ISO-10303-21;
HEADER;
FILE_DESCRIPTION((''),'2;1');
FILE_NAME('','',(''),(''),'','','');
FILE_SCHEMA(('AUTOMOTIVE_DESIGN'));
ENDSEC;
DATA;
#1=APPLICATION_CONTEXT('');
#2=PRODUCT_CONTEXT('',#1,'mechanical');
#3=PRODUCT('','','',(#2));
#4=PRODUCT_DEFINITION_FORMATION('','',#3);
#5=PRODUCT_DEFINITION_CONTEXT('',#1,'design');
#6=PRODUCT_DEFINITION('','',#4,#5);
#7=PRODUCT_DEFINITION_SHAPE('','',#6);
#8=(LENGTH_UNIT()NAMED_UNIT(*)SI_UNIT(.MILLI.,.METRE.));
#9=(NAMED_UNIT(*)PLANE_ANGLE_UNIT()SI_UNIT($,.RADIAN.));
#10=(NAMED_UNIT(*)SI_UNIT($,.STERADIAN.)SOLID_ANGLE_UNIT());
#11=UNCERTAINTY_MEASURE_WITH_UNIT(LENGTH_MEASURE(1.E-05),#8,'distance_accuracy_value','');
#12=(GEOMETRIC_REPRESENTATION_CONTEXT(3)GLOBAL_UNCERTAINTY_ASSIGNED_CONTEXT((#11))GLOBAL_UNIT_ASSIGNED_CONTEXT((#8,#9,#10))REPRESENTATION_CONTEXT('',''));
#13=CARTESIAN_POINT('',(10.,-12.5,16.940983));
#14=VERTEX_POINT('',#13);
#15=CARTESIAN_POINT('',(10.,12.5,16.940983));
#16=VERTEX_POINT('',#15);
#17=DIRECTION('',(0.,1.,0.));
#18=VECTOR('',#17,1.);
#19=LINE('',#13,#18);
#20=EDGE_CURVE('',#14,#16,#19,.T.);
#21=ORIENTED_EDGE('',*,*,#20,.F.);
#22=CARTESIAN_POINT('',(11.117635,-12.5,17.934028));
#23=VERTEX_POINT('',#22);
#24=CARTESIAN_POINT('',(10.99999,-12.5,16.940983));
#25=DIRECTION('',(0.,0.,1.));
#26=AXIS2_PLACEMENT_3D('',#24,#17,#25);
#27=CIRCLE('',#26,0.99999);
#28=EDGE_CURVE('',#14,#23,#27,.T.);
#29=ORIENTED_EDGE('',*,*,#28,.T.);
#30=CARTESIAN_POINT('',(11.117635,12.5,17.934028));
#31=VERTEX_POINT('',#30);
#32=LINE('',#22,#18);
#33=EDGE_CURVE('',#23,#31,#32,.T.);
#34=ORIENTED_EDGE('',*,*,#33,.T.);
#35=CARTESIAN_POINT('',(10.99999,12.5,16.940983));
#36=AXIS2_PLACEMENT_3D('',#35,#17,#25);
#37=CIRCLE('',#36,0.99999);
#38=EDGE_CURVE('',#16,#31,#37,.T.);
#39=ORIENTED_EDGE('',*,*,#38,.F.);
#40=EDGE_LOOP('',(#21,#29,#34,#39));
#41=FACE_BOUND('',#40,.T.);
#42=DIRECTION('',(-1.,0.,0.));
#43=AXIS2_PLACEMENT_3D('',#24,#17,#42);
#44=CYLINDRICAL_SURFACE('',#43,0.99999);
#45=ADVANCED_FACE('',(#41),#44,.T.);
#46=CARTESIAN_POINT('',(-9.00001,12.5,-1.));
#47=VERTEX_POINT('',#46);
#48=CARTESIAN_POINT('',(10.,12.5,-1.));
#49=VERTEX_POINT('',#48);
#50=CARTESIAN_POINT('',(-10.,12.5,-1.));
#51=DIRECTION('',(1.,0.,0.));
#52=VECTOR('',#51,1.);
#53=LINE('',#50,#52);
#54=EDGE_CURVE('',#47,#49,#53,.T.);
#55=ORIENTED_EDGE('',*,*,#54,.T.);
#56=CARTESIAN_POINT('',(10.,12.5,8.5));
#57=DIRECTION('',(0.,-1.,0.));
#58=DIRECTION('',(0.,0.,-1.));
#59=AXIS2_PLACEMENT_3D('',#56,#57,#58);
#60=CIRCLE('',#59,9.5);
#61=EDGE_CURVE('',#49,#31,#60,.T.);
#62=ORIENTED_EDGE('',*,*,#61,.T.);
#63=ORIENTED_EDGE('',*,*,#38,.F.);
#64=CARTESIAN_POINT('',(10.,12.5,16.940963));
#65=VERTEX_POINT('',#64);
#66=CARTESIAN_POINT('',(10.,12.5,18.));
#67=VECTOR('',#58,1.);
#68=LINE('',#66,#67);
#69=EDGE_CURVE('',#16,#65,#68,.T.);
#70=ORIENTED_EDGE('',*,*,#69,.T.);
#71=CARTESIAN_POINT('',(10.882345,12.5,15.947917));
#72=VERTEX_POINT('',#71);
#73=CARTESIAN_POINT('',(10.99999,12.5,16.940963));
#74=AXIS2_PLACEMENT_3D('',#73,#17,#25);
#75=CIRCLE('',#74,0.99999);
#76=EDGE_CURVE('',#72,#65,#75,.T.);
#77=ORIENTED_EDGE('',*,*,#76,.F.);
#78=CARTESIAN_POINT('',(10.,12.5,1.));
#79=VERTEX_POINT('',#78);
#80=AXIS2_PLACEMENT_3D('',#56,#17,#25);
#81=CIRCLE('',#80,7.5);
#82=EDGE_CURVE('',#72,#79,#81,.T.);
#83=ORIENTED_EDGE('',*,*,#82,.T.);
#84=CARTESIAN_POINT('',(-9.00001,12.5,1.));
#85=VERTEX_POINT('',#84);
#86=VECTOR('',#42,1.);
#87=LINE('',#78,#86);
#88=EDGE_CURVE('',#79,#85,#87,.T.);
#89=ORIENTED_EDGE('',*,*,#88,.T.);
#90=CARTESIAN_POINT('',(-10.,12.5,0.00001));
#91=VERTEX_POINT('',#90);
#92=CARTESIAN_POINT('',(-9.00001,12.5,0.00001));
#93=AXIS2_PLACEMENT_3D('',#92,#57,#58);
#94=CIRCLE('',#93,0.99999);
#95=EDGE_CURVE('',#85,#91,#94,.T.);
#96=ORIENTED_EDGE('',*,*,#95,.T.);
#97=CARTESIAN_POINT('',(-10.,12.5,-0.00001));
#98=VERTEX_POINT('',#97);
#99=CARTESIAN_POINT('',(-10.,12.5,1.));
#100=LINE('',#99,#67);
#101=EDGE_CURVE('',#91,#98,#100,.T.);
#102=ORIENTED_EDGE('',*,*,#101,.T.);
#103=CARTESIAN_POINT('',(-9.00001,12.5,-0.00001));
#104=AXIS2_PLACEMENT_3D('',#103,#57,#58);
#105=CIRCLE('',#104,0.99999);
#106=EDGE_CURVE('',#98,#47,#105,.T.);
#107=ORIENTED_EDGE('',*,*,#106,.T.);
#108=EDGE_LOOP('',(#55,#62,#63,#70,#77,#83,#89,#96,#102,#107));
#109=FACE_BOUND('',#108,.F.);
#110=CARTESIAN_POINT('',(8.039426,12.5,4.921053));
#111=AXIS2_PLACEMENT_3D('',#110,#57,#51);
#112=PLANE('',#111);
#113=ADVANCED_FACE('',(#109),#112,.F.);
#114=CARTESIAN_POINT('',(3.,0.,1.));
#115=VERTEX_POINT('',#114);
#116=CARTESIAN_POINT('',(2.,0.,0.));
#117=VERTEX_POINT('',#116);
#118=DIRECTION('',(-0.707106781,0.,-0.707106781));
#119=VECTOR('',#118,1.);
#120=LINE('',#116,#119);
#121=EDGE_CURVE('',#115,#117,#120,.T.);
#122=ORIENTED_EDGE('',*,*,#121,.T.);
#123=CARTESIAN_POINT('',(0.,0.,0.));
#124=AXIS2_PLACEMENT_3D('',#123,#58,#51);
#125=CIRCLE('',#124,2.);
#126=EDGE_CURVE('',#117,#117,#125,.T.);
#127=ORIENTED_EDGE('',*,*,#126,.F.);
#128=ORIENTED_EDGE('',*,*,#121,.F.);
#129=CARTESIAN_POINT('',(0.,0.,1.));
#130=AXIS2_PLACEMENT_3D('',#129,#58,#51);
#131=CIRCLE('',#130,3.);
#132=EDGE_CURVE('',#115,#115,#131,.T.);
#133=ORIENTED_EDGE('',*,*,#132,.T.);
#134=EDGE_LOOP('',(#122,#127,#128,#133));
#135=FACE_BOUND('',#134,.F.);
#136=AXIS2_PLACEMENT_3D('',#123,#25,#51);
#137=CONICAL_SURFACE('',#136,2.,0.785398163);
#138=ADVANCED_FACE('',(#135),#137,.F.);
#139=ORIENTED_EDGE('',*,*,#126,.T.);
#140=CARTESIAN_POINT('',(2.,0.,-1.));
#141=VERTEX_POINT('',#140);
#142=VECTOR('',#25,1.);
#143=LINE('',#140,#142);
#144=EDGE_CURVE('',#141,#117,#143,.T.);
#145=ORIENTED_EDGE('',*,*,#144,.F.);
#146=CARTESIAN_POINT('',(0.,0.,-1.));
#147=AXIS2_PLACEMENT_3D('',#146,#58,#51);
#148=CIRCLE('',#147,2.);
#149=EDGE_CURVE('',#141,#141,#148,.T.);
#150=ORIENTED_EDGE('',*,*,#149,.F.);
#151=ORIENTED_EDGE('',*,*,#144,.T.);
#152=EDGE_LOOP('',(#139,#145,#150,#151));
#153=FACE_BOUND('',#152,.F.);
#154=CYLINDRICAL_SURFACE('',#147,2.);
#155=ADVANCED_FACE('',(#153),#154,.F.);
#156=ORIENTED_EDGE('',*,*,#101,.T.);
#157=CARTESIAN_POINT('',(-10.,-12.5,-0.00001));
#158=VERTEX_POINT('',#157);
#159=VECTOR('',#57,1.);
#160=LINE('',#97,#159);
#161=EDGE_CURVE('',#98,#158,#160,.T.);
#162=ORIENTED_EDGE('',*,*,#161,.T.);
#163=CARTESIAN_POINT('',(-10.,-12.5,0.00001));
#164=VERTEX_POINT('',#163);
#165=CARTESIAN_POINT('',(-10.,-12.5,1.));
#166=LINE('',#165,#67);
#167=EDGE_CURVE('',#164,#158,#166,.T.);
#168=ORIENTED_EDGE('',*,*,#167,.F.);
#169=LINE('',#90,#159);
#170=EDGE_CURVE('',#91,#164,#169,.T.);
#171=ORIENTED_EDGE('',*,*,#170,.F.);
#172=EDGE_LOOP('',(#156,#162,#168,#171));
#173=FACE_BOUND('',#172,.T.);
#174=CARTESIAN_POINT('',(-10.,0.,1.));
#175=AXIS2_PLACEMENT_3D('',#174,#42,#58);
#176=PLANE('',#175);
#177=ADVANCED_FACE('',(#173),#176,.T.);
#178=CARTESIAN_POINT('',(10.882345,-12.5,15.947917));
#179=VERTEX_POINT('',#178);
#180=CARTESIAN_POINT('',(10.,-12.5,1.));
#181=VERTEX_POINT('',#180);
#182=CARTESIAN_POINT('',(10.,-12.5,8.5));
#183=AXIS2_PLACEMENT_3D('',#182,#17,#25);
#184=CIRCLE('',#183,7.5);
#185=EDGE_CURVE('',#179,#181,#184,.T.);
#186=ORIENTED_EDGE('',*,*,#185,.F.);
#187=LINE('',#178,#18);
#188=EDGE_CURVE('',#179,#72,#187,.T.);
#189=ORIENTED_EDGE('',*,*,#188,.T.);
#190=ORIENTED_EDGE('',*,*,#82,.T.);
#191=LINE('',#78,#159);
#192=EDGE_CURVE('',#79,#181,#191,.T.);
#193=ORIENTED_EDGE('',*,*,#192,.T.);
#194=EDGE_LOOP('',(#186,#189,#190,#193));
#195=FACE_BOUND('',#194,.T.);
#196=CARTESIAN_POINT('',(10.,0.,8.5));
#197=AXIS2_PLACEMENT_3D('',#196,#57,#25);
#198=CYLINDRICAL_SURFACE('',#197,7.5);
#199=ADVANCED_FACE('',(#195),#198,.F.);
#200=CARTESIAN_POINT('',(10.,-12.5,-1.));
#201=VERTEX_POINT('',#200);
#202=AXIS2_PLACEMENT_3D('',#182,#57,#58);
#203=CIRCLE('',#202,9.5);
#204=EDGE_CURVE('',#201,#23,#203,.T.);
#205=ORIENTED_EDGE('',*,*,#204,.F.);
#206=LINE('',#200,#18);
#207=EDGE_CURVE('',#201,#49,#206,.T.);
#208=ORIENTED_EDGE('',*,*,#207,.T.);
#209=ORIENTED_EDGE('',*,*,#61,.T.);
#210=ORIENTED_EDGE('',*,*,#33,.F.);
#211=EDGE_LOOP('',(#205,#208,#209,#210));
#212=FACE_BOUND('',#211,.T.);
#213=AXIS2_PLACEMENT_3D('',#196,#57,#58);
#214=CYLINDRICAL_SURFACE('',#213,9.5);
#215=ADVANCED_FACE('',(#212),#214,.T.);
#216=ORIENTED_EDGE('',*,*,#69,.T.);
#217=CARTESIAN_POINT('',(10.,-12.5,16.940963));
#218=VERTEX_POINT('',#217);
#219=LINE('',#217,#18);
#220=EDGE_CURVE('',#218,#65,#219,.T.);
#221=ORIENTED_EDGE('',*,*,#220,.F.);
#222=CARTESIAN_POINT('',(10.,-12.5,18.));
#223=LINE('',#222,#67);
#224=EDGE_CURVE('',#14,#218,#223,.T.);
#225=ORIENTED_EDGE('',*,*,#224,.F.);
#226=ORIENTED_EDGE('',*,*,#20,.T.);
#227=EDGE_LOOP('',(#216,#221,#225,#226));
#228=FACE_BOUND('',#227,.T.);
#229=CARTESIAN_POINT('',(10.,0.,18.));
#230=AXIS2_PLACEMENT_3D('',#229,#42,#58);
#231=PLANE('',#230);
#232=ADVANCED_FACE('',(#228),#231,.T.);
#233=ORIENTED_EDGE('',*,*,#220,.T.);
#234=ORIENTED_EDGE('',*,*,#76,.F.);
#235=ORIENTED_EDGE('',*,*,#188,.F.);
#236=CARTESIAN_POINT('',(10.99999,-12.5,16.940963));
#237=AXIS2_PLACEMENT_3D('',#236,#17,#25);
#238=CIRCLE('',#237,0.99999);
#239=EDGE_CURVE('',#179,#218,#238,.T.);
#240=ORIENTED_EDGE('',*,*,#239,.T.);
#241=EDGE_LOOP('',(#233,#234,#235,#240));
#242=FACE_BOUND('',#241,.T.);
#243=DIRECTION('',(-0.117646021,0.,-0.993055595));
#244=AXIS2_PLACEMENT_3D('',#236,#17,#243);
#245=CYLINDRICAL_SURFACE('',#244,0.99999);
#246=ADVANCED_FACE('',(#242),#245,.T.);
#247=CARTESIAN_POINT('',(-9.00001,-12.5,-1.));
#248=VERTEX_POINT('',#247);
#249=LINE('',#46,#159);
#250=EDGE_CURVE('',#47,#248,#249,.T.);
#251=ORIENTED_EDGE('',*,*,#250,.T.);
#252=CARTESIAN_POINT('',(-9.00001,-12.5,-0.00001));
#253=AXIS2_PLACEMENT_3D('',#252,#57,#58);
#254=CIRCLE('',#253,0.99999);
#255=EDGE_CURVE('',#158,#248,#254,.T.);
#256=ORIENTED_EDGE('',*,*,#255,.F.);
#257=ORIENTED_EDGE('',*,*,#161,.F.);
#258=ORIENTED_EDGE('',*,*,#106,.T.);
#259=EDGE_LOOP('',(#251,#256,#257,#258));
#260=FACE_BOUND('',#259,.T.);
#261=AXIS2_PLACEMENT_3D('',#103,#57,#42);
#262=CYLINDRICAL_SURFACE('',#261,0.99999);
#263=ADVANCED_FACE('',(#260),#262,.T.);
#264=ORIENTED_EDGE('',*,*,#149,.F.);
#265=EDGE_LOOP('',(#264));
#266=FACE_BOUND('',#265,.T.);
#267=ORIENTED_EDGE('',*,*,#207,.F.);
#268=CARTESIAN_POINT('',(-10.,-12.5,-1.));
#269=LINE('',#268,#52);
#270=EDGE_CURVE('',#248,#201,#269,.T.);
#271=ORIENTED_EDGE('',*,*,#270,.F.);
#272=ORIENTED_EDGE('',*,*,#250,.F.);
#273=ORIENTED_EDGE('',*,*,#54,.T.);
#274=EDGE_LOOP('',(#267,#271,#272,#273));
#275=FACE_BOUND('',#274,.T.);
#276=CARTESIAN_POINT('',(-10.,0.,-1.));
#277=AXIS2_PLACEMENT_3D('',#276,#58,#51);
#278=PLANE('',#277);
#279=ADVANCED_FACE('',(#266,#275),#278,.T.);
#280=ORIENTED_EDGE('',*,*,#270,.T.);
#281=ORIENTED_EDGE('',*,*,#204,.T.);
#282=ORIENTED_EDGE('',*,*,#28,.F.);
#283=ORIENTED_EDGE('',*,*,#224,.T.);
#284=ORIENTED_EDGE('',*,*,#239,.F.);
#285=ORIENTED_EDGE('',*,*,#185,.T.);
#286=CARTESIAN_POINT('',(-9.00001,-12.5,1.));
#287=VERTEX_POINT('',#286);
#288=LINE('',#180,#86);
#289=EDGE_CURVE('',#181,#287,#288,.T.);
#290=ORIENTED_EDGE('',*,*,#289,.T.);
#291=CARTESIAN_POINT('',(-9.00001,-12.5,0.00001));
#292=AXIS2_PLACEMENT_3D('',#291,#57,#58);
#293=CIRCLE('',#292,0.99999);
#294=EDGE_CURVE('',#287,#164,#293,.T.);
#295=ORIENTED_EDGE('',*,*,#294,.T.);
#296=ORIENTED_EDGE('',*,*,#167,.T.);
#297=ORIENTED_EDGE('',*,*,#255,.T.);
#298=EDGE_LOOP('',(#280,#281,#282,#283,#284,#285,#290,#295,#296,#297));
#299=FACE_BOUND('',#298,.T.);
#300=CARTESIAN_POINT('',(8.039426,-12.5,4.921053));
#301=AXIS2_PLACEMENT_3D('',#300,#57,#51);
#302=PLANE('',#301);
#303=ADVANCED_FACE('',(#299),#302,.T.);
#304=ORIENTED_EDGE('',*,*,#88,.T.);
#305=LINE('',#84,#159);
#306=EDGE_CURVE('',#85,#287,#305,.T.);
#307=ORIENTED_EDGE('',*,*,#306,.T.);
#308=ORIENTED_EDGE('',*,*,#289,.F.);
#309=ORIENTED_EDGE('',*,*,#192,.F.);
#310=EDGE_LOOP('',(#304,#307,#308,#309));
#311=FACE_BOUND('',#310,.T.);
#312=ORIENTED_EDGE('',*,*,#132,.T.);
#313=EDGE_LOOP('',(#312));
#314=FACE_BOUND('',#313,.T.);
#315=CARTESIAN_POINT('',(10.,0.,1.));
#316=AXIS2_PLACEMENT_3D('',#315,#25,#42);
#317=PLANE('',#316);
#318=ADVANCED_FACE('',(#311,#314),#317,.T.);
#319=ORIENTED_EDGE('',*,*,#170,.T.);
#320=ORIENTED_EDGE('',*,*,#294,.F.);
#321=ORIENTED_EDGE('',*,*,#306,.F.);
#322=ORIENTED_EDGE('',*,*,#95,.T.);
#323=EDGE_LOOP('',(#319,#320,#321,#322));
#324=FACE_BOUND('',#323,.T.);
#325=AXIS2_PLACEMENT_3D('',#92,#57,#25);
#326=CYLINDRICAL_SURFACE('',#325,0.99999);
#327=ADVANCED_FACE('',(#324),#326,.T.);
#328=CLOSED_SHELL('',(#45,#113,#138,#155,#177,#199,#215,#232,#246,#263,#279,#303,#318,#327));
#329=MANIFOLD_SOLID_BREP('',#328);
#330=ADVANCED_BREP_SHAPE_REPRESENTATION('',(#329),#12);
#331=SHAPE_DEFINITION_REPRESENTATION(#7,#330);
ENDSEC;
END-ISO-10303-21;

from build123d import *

# Parameters (mm, degrees)
F1_DEPTH = 12.5
F2_R     = 2
F3_DEPTH = 25
F4_SIZE  = 1
F5_R     = 0.99999


# Not quite as in the source:
# - a fillet or chamfer is up to 0.001 mm smaller than in the source, because OpenCascade refuses the exact size


with BuildPart() as f1:
    # F0 (on Front) → F1 (new body, symmetric)
    with BuildSketch(Plane.XZ):
        with BuildLine():
            ThreePointArc((10, 16), (17.5, 8.5), (10, 1))
            Line((10, 1), (-10, 1))
            Line((-10, 1), (-10, -1))
            Line((-10, -1), (10, -1))
            ThreePointArc((10, -1), (19.5, 8.5), (10, 18))
            Line((10, 18), (10, 16))
        make_face()
    extrude(amount=F1_DEPTH, both=True)

    # F2 (on face) → F3 (cut)
    with BuildSketch(Plane(origin=(0, 0, -1), x_dir=(1, 0, 0), z_dir=(0, 0, -1))):
        Circle(F2_R)
    extrude(amount=-F3_DEPTH, mode=Mode.SUBTRACT)

    # F4
    f4_edges = [f1.edges().sort_by_distance(p)[0] for p in [
        (-2, 0, 1),
    ]]
    chamfer(f4_edges, length=F4_SIZE)

    # F5 (radius 1 in the source; OpenCascade refuses exactly that, so slightly less here)
    f5_edges = [f1.edges().sort_by_distance(p)[0] for p in [
        (10, 0, 18),
        (10, 0, 16),
        (-10, 0, 1),
        (-10, 0, -1),
    ]]
    fillet(f5_edges, radius=F5_R)


solid = f1.part
